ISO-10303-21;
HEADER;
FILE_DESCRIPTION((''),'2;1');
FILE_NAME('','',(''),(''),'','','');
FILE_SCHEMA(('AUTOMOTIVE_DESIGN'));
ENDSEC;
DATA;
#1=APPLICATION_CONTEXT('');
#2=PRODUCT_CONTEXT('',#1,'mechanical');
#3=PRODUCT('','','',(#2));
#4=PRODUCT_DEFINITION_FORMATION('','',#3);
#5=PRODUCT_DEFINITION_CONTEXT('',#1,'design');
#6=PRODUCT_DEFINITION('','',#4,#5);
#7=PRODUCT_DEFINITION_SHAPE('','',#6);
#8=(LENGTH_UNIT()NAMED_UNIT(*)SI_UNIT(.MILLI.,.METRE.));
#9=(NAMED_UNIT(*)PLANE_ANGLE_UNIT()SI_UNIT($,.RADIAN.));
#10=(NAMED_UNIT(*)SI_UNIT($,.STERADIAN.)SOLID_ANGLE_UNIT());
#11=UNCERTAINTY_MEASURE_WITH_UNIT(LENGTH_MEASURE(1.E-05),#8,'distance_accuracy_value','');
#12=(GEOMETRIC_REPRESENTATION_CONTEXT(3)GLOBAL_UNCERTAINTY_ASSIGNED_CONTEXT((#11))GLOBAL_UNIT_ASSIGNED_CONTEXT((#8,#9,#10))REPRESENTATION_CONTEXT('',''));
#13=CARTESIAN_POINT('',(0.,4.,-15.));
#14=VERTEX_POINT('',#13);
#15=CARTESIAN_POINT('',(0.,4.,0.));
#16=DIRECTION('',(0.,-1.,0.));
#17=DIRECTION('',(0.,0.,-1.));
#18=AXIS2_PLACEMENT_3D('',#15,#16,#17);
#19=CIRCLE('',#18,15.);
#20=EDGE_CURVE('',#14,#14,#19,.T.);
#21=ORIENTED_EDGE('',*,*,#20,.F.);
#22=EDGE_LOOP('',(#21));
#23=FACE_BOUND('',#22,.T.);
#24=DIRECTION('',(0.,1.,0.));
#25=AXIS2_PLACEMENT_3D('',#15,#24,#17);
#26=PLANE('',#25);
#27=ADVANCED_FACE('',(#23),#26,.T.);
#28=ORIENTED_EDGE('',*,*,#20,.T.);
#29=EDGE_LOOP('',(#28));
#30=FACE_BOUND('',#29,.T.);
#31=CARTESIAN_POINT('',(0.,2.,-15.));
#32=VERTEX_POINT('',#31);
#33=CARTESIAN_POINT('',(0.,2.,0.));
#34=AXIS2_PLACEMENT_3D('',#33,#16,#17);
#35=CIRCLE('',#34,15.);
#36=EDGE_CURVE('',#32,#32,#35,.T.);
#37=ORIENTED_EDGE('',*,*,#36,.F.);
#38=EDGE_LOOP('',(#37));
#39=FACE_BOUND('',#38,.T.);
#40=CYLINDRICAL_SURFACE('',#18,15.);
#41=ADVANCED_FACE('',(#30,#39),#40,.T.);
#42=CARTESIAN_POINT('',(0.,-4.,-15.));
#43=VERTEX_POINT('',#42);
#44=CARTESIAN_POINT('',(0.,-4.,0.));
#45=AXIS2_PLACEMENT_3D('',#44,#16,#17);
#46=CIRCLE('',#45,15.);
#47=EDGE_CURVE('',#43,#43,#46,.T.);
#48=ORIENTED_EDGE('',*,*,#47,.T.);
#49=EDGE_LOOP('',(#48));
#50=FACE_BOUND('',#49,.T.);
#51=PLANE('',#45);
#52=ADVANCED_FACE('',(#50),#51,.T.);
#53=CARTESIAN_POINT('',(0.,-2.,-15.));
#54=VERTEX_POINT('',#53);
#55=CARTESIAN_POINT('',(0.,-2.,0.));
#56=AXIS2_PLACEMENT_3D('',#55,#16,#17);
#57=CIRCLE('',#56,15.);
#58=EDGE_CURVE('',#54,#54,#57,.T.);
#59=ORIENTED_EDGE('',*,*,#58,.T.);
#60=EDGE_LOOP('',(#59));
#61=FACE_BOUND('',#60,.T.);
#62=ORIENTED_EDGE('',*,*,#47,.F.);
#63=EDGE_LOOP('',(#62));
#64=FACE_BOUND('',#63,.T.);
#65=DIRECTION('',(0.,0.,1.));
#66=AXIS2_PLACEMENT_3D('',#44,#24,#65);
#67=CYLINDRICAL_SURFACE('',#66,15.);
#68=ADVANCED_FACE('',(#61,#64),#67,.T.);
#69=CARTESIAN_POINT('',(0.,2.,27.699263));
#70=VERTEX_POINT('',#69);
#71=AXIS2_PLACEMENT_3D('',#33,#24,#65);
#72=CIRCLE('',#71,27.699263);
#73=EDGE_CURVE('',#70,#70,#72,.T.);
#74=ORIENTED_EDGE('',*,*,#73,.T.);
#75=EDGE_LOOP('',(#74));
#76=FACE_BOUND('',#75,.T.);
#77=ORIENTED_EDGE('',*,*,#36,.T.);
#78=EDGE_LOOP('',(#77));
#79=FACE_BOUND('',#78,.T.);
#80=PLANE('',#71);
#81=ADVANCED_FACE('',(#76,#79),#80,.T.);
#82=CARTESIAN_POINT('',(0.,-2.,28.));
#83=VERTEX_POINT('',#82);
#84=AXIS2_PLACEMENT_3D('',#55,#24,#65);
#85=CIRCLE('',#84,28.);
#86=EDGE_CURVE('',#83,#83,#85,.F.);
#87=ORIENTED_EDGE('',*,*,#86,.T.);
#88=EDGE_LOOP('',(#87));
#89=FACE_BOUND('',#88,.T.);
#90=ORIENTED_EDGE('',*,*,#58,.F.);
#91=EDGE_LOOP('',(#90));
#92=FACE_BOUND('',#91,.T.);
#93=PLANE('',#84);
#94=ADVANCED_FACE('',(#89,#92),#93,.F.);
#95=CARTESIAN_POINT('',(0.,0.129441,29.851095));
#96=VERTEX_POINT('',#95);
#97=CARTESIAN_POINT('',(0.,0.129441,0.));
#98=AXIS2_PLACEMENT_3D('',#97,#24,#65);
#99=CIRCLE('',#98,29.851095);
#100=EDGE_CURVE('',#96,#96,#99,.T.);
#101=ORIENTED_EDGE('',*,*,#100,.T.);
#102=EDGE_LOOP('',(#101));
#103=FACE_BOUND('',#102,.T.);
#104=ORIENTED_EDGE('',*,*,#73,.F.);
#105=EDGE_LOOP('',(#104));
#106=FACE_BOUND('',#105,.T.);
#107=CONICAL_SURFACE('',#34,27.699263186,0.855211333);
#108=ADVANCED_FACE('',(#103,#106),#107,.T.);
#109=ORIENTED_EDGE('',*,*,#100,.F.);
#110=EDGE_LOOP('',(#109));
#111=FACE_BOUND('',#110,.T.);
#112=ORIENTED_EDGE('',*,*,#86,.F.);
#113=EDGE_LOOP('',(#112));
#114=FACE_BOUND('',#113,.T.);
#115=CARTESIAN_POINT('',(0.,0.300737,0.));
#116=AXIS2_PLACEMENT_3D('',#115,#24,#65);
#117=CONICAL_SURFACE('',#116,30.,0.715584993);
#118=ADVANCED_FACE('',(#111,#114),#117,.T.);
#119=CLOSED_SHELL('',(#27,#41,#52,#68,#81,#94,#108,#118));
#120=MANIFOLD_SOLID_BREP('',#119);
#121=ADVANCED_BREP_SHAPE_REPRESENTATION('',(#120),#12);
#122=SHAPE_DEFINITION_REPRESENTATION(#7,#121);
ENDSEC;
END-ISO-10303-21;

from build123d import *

# Parameters (mm, degrees)
BOSS_EXTRU_1_DEPTH      = 2
BOSS_EXTRU_1_DEPTH_BACK = 2
ESQUISSE1_R             = 30
CHANFREIN1_SIZE2        = 2.300736814
CHANFREIN1_SIZE         = 2
CHANFREIN2_SIZE         = 2.300736814
CHANFREIN2_SIZE_2       = 2
ESQUISSE2_R             = 15
BOSS_EXTRU_2_DEPTH      = 2


# Some blends are built 0.0001 mm under size
with BuildPart() as part:
    # Esquisse1 → Boss.-Extru.1 (new, two sides: drawn at the far end of the back side and taken through both)
    with BuildSketch(Plane(origin=(0, 0, 0), x_dir=(1, 0, 0), z_dir=(0, 1, 0)).offset(-BOSS_EXTRU_1_DEPTH_BACK)):
        with Locations(Location((0, 0, 0), (0, 0, 270))):
            Circle(ESQUISSE1_R)
    extrude(amount=BOSS_EXTRU_1_DEPTH + BOSS_EXTRU_1_DEPTH_BACK)

    # Chanfrein1
    chanfrein1_edges = [part.edges().sort_by_distance(p)[0] for p in [
        (0, 2, -30),
    ]]
    chanfrein1_side = [part.faces().sort_by_distance(p)[0] for p in [
        (0, 1.96, -30),
    ]]
    chamfer(chanfrein1_edges, length=CHANFREIN1_SIZE - 0.0001, length2=CHANFREIN1_SIZE2 - 0.0001, reference=chanfrein1_side[0])  # a hair under: the kernel refuses the full size

    # Chanfrein2
    # the kernel refuses this chamfer: 2.300736814, 2 mm, written as the material it takes off along each edge
    with BuildSketch(Plane(origin=(0, -2, 0), x_dir=(0, 0, 1), z_dir=(-1, 0, 0))) as chanfrein2_piece_1:
        Polygon((30, CHANFREIN2_SIZE), (30 - CHANFREIN2_SIZE_2, 0), (30, 0), align=None)
    revolve(axis=Axis((0, -2, 0), (0, 1, 0)), mode=Mode.SUBTRACT)

    # Esquisse2 → Boss.-Extru.2 (add)
    with BuildSketch(Plane.XZ.offset(2)):
        with Locations(Location((0, 0, 0), (0, 0, 270))):
            Circle(ESQUISSE2_R)
    boss_extru_2 = extrude(amount=BOSS_EXTRU_2_DEPTH)

    # Symétrie1: Boss.-Extru.2 across plane
    add(boss_extru_2.mirror(Plane.ZX))


solid = part.part
